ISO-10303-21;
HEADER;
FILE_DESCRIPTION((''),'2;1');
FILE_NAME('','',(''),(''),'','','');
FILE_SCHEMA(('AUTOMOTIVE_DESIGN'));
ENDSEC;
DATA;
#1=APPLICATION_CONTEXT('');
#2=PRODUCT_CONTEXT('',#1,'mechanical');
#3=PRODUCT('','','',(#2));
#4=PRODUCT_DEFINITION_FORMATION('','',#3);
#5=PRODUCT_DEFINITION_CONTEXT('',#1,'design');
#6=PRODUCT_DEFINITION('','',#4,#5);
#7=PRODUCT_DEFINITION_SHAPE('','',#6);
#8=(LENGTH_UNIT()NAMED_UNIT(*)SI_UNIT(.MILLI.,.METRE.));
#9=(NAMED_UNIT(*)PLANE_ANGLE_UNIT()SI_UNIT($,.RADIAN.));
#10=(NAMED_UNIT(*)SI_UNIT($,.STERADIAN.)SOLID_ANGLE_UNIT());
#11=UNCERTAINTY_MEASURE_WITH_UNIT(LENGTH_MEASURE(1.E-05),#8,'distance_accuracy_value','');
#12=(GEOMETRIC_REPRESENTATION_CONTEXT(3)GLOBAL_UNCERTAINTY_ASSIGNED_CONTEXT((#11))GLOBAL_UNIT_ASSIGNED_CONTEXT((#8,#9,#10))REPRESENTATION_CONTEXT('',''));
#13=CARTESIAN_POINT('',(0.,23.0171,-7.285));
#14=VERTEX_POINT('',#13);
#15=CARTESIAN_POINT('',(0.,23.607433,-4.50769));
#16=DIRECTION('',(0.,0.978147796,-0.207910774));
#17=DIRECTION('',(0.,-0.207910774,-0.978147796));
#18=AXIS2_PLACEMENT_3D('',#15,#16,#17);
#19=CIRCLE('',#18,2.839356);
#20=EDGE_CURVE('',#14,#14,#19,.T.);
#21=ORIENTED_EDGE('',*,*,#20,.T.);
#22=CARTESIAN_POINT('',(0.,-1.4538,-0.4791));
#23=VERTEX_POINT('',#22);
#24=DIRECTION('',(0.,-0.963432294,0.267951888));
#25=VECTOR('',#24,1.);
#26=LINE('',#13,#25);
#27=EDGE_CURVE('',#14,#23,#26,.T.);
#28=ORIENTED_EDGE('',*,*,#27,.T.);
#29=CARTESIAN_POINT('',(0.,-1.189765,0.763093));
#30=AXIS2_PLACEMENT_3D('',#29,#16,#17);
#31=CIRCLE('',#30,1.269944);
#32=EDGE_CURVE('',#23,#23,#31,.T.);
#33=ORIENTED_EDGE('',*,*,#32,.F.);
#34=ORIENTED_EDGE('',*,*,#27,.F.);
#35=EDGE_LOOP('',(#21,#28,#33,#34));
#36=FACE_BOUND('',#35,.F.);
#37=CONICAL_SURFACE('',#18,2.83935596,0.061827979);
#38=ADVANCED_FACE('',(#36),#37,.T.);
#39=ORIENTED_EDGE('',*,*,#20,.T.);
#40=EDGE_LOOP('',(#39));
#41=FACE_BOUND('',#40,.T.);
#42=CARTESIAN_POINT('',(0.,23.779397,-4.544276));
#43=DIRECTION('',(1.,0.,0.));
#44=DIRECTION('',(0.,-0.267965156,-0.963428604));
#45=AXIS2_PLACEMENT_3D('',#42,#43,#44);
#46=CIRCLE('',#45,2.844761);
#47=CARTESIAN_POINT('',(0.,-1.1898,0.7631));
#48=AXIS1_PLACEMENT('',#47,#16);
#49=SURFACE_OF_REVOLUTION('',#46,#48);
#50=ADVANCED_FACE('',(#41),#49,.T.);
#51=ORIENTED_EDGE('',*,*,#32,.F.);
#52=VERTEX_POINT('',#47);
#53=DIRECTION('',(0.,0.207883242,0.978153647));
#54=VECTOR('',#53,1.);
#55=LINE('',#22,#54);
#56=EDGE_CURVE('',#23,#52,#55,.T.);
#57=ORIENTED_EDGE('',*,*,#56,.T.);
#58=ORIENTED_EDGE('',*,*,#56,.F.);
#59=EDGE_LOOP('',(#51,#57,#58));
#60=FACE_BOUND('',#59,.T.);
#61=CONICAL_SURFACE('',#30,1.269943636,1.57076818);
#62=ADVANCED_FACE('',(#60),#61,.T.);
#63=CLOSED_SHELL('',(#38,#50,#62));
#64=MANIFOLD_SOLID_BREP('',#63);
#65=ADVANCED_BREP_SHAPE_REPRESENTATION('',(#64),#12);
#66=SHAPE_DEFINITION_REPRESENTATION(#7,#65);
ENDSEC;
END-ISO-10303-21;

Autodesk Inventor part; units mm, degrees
sketch "Sketch_1" plane through (0, 0, 0) normal (1, 0, 0) x (0, 1, 0)
  line L0 (-1.1898, 0.7631) -> (26.562, -5.1357)
  arc A0 (23.0171, -7.285) -> (26.562, -5.1357) centre (23.7794, -4.5443) ccw
  line L1 (23.0171, -7.285) -> (-1.4538, -0.4791)
  line L2 (-1.4538, -0.4791) -> (-1.1898, 0.7631)
  line L3 (-1.1898, 0.7631) -> (26.562, -5.1357)
revolve "Revolution1" add sketch "Sketch_1" angle 360 about axis through (0, -1.1898, 0.7631) along (0, 0.9781476, -0.2079117)
ref_plane "toggle_XY" through (0, 2.4003, 0) normal (0, 1, 0) x (1, 0, 0)
ref_plane "toggle_YZ" through (0, 2.4003, 0) normal (1, 0, 0) x (0, 0, -1)
ref_plane "toggle_ZX" through (0, 2.4003, 0) normal (0, 0, -1) x (0, 1, 0)
properties part number "WT_toggle"
